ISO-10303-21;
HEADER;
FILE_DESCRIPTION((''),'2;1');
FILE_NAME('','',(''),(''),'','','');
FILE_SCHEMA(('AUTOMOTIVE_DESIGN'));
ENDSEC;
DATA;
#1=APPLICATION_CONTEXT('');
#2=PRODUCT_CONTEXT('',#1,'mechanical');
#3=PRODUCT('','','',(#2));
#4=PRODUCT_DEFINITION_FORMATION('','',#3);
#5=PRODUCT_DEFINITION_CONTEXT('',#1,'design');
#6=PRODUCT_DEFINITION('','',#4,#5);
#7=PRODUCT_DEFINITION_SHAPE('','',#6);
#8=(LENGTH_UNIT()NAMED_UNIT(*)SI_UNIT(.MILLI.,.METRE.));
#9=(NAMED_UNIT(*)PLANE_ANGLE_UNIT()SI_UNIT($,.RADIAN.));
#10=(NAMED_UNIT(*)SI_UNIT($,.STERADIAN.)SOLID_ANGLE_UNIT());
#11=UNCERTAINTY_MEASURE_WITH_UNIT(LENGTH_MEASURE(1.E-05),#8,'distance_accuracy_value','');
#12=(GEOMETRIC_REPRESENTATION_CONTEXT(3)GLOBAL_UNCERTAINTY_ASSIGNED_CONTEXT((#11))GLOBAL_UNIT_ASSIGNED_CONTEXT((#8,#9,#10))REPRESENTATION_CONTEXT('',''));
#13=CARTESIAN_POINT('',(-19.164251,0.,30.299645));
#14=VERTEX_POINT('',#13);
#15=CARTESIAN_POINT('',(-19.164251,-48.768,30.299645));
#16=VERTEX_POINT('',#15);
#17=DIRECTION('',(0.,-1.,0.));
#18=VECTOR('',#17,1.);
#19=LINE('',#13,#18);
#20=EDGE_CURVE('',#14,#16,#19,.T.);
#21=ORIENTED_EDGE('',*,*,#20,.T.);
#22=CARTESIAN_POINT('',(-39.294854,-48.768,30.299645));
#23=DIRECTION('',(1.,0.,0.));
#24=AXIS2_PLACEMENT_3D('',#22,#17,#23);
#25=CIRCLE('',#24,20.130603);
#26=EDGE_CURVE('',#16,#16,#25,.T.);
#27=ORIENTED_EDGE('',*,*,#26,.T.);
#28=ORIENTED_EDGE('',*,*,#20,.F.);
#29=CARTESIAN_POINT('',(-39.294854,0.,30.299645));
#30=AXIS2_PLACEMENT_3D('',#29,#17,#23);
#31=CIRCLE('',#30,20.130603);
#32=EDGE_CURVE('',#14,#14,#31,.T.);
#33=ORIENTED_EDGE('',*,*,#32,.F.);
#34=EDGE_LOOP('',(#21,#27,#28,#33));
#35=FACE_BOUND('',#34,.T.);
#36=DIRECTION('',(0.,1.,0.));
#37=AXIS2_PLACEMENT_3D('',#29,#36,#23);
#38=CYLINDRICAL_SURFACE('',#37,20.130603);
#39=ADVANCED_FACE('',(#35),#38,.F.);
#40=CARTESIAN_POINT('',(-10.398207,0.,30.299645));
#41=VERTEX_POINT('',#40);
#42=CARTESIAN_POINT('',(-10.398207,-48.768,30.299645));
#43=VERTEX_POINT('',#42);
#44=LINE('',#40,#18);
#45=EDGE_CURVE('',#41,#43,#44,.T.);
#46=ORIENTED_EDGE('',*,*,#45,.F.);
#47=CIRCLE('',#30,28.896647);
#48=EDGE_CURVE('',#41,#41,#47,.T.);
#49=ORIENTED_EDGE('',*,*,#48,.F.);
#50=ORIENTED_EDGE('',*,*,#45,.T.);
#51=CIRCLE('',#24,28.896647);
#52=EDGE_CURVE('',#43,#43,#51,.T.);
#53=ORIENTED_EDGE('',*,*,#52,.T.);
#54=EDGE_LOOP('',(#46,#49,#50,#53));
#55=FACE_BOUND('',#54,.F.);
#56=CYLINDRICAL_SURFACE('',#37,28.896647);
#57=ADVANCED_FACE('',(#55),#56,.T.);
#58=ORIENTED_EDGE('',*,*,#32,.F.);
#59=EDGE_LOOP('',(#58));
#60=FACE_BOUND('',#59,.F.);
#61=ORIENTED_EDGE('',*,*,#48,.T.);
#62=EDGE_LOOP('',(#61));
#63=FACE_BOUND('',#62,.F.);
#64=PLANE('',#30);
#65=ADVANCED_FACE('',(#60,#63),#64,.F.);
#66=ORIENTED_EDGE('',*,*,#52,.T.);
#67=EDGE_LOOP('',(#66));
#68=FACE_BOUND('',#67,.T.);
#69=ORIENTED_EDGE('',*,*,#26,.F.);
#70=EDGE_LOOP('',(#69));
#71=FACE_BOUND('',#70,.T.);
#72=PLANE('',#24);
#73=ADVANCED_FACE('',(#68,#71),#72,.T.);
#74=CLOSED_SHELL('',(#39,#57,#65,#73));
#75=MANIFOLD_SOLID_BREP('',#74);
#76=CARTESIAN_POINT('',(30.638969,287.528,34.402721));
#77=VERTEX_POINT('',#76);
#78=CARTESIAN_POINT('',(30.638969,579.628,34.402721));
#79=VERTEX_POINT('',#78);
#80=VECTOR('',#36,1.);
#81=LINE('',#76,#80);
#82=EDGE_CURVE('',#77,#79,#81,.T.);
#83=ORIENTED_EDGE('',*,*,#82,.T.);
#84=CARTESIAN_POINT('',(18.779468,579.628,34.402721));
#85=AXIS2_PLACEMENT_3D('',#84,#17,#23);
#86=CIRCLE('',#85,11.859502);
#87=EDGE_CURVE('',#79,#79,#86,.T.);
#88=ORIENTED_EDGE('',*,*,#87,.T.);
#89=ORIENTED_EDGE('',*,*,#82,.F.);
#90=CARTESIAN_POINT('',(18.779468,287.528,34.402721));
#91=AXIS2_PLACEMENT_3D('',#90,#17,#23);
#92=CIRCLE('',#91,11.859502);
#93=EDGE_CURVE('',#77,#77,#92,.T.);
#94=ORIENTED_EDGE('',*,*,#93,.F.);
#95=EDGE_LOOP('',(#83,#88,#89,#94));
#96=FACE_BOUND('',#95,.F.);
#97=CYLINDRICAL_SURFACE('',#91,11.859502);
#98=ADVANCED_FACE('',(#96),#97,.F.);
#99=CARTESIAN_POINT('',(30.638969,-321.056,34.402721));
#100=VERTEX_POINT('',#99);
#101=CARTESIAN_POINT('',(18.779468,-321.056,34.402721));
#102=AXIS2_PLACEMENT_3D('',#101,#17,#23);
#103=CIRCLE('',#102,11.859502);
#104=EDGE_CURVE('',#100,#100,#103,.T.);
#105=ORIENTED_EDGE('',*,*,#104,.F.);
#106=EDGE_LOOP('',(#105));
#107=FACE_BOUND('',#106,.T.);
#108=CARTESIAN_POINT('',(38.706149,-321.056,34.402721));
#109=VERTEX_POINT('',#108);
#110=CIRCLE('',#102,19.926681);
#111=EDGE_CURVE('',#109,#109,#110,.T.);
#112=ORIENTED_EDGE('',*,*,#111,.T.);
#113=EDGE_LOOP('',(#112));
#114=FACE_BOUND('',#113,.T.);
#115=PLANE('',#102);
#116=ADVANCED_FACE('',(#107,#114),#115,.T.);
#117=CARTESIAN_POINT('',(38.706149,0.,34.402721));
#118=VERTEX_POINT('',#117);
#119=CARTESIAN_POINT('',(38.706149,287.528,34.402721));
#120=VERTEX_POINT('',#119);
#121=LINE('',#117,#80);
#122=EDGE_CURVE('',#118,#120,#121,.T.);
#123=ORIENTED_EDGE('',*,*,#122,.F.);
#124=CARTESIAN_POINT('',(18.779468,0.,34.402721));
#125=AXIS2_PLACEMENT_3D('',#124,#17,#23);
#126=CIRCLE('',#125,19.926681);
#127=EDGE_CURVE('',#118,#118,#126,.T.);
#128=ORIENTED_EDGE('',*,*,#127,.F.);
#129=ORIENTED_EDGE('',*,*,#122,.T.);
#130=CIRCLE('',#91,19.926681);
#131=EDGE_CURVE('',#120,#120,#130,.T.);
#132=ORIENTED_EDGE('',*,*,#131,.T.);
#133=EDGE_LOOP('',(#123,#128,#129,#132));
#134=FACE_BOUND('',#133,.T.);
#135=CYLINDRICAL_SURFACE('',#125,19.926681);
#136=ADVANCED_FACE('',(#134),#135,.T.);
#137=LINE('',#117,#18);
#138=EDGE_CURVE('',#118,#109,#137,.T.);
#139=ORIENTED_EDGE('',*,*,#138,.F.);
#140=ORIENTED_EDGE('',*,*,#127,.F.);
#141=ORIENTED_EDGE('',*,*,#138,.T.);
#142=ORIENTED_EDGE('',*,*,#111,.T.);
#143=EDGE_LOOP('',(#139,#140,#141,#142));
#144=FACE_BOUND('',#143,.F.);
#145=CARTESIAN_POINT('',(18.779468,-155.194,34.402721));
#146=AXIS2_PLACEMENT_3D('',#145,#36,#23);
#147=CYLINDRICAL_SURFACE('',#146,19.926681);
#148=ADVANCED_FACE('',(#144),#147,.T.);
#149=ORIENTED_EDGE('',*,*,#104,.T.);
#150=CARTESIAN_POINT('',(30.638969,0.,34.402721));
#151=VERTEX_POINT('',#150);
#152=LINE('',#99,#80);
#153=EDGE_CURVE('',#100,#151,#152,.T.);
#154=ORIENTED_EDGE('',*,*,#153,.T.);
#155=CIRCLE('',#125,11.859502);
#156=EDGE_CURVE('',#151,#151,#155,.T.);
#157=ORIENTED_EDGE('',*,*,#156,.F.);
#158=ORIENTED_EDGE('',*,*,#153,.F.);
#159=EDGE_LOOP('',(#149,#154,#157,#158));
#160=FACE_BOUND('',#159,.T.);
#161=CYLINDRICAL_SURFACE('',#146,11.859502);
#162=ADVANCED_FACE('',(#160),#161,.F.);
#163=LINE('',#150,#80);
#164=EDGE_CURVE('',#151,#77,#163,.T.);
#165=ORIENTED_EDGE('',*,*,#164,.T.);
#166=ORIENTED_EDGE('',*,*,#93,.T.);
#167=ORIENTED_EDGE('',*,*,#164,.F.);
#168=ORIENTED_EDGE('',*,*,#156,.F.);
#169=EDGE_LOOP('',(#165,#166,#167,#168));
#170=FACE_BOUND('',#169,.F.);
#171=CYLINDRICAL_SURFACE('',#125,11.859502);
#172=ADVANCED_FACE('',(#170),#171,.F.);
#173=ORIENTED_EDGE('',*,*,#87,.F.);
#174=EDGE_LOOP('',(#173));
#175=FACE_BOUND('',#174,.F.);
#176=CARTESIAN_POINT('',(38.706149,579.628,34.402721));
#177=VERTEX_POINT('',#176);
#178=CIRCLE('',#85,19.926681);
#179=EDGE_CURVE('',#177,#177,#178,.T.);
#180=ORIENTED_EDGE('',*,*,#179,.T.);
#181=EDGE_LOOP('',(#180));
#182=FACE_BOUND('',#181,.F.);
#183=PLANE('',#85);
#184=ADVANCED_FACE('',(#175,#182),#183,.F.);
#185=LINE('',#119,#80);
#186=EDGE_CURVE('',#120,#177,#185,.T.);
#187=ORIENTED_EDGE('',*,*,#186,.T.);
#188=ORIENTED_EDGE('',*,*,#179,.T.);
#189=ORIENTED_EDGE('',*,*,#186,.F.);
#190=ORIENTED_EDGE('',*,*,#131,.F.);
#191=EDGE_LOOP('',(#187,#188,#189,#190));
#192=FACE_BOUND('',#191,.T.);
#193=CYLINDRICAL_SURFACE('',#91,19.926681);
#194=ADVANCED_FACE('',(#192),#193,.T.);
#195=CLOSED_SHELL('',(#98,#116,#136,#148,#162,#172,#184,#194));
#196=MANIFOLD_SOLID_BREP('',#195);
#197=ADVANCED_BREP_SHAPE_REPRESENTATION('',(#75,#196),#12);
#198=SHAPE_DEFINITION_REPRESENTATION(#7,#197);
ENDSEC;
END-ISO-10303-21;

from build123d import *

# Parameters (mm, degrees)
F0_R     = 28.8966469819
F0_R_2   = 20.1306031815
F1_DEPTH = 48.768
F2_R     = 19.9266814882
F2_R_2   = 11.8595015416
F3_DEPTH = 155.194
F4_DEPTH = 165.862
F5_DEPTH = 287.528
F6_DEPTH = 292.1


with BuildPart() as f1:
    # F0 (on Front) → F1 (new body)
    with BuildSketch(Plane.XZ):
        with Locations((-39.2948538065, 30.2996449172)):
            Circle(F0_R)
        with Locations((-39.2948538065, 30.2996449172)):
            Circle(F0_R_2, mode=Mode.SUBTRACT)
    extrude(amount=F1_DEPTH)


with BuildPart() as f3:
    # F2 (on Front) → F3 (new body)
    with BuildSketch(Plane.XZ):
        with Locations((18.7794677913, 34.4027206302)):
            Circle(F2_R)
        with Locations((18.7794677913, 34.4027206302)):
            Circle(F2_R_2, mode=Mode.SUBTRACT)
    extrude(amount=F3_DEPTH)

    # F4 (add): a face of the model
    f4_faces = [f3.faces().sort_by_distance(p)[0] for p in [
        (-0.5836020326, -155.194, 34.4027206302),
    ]]
    extrude(f4_faces, amount=F4_DEPTH)

    # F5 (add): a face of the model
    f5_faces = [f3.faces().sort_by_distance(p)[0] for p in [
        (-0.5836020326, 0, 34.4027206302),
    ]]
    extrude(f5_faces, amount=F5_DEPTH)

    # F6 (add): a face of the model
    f6_faces = [f3.faces().sort_by_distance(p)[0] for p in [
        (-0.5836020326, 287.528, 34.4027206302),
    ]]
    extrude(f6_faces, amount=F6_DEPTH)


solid = Compound([f1.part, f3.part])
